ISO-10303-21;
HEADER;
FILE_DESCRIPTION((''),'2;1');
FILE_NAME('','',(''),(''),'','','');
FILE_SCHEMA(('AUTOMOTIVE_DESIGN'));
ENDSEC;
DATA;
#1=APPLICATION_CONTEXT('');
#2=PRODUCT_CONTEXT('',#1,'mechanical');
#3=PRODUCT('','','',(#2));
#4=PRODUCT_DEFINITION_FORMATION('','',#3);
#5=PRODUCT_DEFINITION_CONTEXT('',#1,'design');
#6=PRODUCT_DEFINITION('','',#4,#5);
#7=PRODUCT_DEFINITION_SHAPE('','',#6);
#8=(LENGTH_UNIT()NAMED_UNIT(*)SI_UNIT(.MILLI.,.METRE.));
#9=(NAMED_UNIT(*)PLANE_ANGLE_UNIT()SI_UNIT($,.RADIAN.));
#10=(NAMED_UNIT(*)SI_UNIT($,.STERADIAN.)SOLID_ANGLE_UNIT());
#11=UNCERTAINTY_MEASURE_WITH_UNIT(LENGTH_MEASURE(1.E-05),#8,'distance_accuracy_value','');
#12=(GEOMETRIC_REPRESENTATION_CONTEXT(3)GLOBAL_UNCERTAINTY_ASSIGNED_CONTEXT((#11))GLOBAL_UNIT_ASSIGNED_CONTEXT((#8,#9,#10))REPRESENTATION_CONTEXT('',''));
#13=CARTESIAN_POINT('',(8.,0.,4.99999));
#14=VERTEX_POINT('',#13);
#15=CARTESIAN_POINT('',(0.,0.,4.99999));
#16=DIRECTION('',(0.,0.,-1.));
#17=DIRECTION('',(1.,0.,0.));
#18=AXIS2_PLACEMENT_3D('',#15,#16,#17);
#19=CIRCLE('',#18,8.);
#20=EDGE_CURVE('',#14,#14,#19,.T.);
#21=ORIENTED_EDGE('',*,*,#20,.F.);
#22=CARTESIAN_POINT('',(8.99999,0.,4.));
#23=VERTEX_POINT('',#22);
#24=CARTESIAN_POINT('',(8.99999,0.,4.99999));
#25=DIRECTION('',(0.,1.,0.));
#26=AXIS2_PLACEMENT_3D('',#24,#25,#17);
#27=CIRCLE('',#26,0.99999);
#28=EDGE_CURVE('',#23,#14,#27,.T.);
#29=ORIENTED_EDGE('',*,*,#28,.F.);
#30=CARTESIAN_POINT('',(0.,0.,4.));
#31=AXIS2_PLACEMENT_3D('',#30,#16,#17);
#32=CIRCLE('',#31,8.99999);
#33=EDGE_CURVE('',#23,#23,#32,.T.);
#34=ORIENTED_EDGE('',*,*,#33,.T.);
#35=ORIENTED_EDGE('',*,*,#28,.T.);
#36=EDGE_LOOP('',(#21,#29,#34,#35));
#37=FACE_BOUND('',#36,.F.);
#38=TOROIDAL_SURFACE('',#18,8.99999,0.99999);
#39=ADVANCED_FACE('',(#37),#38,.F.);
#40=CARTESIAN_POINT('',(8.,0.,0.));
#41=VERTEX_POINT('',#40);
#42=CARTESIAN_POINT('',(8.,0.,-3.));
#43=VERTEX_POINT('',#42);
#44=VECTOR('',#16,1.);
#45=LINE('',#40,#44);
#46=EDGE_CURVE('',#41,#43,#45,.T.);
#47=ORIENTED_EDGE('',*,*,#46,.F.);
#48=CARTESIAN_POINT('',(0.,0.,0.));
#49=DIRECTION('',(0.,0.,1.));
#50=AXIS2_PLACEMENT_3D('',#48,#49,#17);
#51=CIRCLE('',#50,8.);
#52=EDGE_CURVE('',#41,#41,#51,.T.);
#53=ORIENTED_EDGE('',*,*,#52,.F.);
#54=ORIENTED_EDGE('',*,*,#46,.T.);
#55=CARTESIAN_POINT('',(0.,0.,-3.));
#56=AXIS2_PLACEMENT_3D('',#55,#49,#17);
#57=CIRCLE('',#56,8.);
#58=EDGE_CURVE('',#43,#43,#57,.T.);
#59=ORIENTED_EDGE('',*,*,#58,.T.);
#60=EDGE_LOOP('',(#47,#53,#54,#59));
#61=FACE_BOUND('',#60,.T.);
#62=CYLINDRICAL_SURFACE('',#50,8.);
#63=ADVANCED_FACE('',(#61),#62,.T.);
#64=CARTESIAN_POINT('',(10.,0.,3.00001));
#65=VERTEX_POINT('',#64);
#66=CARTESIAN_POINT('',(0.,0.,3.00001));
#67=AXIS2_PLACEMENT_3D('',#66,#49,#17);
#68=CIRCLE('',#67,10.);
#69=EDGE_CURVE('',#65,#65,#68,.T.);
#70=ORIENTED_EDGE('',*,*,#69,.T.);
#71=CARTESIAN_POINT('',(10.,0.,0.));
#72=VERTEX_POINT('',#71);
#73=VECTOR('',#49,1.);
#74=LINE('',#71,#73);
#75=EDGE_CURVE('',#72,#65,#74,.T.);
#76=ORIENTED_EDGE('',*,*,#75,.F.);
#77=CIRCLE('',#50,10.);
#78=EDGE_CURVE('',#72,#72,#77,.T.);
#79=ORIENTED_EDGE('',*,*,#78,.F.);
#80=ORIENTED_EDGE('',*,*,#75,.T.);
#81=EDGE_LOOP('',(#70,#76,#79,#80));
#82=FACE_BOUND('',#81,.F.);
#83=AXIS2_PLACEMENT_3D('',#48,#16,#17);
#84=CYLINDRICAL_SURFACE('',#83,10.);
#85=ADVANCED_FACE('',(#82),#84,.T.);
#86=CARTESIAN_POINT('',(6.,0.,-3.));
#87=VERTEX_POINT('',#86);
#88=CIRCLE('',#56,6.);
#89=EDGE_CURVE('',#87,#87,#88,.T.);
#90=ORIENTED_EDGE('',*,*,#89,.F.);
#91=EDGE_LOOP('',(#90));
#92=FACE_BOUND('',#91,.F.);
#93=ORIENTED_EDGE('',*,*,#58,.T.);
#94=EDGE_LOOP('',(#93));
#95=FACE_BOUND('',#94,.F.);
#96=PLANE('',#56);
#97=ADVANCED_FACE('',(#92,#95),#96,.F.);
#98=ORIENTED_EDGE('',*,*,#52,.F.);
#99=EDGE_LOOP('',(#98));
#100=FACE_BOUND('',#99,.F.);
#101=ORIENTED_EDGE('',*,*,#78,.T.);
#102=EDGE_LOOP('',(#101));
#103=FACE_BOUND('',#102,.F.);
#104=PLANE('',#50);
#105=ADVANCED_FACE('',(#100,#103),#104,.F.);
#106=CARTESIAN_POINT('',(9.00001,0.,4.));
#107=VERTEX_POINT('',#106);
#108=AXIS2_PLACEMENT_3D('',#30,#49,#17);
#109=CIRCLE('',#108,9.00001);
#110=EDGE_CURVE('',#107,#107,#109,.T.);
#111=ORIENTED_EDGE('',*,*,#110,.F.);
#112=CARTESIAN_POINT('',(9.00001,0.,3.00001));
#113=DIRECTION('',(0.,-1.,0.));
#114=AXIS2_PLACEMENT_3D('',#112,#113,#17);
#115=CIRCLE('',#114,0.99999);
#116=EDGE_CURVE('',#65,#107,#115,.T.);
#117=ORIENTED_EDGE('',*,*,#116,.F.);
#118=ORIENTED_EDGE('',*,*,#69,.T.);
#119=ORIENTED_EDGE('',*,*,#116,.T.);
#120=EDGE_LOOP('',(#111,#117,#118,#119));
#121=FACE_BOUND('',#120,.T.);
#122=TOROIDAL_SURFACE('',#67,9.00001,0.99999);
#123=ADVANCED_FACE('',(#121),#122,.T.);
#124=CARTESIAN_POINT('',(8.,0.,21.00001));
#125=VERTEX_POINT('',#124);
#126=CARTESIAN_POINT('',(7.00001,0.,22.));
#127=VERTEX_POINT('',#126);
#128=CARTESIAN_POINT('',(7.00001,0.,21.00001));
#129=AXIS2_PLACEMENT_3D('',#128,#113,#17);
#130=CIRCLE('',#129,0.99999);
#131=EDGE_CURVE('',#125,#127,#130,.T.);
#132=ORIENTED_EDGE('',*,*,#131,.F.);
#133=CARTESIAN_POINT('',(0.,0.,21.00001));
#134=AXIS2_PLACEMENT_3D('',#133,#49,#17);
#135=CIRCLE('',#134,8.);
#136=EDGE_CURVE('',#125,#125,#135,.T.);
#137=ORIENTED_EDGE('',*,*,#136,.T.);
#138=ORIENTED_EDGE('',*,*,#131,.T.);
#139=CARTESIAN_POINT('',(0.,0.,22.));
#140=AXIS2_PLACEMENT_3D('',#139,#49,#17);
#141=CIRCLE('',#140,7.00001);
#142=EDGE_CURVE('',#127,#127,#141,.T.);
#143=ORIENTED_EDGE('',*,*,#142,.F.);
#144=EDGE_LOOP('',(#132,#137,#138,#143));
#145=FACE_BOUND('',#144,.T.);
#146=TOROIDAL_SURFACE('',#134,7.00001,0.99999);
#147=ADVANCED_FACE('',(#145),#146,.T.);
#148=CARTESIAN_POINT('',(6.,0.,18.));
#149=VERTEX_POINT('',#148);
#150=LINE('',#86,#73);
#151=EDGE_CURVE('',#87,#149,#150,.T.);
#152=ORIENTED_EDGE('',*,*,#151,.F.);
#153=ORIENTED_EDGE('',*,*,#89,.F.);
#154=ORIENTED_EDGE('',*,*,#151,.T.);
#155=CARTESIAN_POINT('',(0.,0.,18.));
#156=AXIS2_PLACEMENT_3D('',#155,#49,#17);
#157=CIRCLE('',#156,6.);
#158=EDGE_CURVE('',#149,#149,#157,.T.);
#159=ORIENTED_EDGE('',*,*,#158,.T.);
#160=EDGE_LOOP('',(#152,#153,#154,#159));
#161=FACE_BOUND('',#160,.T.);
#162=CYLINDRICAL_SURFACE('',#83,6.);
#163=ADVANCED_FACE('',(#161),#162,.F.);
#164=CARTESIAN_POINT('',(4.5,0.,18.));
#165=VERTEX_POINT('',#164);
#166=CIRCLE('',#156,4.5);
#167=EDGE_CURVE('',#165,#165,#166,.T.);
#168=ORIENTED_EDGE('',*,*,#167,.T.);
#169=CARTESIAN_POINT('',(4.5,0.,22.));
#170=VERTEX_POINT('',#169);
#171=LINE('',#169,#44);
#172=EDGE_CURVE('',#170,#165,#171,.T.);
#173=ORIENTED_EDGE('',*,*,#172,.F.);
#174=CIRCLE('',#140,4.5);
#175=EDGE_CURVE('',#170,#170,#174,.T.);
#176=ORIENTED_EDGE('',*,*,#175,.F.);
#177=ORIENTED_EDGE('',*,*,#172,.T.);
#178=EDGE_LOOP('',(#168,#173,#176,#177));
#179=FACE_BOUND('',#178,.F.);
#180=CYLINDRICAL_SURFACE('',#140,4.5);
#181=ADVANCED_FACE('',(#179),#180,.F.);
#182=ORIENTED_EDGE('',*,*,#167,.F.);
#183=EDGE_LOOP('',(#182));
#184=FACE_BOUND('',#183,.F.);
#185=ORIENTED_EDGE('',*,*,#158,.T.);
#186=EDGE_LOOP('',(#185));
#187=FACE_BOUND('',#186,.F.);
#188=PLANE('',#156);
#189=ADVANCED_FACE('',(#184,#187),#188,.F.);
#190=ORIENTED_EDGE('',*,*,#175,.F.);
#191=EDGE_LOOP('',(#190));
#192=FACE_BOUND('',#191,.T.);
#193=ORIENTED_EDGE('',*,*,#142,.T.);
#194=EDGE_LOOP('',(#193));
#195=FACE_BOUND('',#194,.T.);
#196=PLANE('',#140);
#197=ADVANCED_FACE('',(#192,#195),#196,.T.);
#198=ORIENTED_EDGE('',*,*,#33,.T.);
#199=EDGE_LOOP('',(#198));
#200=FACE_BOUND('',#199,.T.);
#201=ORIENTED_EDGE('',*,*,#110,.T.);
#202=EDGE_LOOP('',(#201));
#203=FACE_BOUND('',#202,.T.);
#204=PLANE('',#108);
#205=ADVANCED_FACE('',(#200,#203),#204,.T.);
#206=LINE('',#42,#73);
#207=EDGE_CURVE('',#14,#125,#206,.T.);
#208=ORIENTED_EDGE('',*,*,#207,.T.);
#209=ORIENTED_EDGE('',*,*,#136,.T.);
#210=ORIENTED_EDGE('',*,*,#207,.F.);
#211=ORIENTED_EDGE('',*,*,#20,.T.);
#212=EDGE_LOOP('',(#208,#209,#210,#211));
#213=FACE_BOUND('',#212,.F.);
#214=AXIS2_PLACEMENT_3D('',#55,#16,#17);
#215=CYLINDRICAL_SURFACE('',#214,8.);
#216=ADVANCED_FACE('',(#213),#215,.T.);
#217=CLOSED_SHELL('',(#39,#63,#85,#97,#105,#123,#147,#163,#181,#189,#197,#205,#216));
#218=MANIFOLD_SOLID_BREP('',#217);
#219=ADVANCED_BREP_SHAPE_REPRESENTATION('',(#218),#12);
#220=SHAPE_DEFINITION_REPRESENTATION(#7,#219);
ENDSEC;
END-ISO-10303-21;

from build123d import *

# Parameters (mm, degrees)
F0_R          = 8
F0_R_2        = 6
F1_DEPTH      = 3
F0_R_3        = 10
F2_DEPTH      = 4
F3_DEPTH      = 25
F4_START      = 18
F4_DEPTH      = 4
F5_R          = 0.99999
F6_R          = 4.5
F7_DEPTH      = 25
F7_DEPTH_BACK = 25


# Not quite as in the source:
# - a fillet or chamfer is up to 0.001 mm smaller than in the source, because OpenCascade refuses the exact size


with BuildPart() as f1:
    # F0 (on Top) → F1 (new body)
    with BuildSketch(Plane.XY):
        Circle(F0_R)
        Circle(F0_R_2, mode=Mode.SUBTRACT)
    extrude(amount=-F1_DEPTH)

    # F0 (on Top) → F2 (join)
    with BuildSketch(Plane.XY):
        Circle(F0_R_3)
        Circle(F0_R, mode=Mode.SUBTRACT)
        Circle(F0_R)
        Circle(F0_R_2, mode=Mode.SUBTRACT)
    extrude(amount=F2_DEPTH)

    # F3 (add): a face of the model
    f3_faces = [f1.faces().sort_by_distance(p)[0] for p in [
        (-7.77372583, 0, -3),
    ]]
    extrude(f3_faces, amount=-F3_DEPTH)

    # F0 (on Top) → F4 (join)
    with BuildSketch(Plane.XY.offset(F4_START)):
        Circle(F0_R_2)
    extrude(amount=F4_DEPTH)

    # F5 (radius 1 in the source; OpenCascade refuses exactly that, so slightly less here)
    f5_edges = [f1.edges().sort_by_distance(p)[0] for p in [
        (-8, 0, 4),
        (-10, 0, 4),
        (-8, 0, 22),
    ]]
    fillet(f5_edges, radius=F5_R)

    # F6 (on face) → F7 (cut, two sides)
    with BuildSketch(Plane.XY.offset(22)) as f7_sk:
        Circle(F6_R)
    extrude(amount=-F7_DEPTH, mode=Mode.SUBTRACT)
    extrude(f7_sk.sketch, amount=F7_DEPTH_BACK, mode=Mode.SUBTRACT)


solid = f1.part
